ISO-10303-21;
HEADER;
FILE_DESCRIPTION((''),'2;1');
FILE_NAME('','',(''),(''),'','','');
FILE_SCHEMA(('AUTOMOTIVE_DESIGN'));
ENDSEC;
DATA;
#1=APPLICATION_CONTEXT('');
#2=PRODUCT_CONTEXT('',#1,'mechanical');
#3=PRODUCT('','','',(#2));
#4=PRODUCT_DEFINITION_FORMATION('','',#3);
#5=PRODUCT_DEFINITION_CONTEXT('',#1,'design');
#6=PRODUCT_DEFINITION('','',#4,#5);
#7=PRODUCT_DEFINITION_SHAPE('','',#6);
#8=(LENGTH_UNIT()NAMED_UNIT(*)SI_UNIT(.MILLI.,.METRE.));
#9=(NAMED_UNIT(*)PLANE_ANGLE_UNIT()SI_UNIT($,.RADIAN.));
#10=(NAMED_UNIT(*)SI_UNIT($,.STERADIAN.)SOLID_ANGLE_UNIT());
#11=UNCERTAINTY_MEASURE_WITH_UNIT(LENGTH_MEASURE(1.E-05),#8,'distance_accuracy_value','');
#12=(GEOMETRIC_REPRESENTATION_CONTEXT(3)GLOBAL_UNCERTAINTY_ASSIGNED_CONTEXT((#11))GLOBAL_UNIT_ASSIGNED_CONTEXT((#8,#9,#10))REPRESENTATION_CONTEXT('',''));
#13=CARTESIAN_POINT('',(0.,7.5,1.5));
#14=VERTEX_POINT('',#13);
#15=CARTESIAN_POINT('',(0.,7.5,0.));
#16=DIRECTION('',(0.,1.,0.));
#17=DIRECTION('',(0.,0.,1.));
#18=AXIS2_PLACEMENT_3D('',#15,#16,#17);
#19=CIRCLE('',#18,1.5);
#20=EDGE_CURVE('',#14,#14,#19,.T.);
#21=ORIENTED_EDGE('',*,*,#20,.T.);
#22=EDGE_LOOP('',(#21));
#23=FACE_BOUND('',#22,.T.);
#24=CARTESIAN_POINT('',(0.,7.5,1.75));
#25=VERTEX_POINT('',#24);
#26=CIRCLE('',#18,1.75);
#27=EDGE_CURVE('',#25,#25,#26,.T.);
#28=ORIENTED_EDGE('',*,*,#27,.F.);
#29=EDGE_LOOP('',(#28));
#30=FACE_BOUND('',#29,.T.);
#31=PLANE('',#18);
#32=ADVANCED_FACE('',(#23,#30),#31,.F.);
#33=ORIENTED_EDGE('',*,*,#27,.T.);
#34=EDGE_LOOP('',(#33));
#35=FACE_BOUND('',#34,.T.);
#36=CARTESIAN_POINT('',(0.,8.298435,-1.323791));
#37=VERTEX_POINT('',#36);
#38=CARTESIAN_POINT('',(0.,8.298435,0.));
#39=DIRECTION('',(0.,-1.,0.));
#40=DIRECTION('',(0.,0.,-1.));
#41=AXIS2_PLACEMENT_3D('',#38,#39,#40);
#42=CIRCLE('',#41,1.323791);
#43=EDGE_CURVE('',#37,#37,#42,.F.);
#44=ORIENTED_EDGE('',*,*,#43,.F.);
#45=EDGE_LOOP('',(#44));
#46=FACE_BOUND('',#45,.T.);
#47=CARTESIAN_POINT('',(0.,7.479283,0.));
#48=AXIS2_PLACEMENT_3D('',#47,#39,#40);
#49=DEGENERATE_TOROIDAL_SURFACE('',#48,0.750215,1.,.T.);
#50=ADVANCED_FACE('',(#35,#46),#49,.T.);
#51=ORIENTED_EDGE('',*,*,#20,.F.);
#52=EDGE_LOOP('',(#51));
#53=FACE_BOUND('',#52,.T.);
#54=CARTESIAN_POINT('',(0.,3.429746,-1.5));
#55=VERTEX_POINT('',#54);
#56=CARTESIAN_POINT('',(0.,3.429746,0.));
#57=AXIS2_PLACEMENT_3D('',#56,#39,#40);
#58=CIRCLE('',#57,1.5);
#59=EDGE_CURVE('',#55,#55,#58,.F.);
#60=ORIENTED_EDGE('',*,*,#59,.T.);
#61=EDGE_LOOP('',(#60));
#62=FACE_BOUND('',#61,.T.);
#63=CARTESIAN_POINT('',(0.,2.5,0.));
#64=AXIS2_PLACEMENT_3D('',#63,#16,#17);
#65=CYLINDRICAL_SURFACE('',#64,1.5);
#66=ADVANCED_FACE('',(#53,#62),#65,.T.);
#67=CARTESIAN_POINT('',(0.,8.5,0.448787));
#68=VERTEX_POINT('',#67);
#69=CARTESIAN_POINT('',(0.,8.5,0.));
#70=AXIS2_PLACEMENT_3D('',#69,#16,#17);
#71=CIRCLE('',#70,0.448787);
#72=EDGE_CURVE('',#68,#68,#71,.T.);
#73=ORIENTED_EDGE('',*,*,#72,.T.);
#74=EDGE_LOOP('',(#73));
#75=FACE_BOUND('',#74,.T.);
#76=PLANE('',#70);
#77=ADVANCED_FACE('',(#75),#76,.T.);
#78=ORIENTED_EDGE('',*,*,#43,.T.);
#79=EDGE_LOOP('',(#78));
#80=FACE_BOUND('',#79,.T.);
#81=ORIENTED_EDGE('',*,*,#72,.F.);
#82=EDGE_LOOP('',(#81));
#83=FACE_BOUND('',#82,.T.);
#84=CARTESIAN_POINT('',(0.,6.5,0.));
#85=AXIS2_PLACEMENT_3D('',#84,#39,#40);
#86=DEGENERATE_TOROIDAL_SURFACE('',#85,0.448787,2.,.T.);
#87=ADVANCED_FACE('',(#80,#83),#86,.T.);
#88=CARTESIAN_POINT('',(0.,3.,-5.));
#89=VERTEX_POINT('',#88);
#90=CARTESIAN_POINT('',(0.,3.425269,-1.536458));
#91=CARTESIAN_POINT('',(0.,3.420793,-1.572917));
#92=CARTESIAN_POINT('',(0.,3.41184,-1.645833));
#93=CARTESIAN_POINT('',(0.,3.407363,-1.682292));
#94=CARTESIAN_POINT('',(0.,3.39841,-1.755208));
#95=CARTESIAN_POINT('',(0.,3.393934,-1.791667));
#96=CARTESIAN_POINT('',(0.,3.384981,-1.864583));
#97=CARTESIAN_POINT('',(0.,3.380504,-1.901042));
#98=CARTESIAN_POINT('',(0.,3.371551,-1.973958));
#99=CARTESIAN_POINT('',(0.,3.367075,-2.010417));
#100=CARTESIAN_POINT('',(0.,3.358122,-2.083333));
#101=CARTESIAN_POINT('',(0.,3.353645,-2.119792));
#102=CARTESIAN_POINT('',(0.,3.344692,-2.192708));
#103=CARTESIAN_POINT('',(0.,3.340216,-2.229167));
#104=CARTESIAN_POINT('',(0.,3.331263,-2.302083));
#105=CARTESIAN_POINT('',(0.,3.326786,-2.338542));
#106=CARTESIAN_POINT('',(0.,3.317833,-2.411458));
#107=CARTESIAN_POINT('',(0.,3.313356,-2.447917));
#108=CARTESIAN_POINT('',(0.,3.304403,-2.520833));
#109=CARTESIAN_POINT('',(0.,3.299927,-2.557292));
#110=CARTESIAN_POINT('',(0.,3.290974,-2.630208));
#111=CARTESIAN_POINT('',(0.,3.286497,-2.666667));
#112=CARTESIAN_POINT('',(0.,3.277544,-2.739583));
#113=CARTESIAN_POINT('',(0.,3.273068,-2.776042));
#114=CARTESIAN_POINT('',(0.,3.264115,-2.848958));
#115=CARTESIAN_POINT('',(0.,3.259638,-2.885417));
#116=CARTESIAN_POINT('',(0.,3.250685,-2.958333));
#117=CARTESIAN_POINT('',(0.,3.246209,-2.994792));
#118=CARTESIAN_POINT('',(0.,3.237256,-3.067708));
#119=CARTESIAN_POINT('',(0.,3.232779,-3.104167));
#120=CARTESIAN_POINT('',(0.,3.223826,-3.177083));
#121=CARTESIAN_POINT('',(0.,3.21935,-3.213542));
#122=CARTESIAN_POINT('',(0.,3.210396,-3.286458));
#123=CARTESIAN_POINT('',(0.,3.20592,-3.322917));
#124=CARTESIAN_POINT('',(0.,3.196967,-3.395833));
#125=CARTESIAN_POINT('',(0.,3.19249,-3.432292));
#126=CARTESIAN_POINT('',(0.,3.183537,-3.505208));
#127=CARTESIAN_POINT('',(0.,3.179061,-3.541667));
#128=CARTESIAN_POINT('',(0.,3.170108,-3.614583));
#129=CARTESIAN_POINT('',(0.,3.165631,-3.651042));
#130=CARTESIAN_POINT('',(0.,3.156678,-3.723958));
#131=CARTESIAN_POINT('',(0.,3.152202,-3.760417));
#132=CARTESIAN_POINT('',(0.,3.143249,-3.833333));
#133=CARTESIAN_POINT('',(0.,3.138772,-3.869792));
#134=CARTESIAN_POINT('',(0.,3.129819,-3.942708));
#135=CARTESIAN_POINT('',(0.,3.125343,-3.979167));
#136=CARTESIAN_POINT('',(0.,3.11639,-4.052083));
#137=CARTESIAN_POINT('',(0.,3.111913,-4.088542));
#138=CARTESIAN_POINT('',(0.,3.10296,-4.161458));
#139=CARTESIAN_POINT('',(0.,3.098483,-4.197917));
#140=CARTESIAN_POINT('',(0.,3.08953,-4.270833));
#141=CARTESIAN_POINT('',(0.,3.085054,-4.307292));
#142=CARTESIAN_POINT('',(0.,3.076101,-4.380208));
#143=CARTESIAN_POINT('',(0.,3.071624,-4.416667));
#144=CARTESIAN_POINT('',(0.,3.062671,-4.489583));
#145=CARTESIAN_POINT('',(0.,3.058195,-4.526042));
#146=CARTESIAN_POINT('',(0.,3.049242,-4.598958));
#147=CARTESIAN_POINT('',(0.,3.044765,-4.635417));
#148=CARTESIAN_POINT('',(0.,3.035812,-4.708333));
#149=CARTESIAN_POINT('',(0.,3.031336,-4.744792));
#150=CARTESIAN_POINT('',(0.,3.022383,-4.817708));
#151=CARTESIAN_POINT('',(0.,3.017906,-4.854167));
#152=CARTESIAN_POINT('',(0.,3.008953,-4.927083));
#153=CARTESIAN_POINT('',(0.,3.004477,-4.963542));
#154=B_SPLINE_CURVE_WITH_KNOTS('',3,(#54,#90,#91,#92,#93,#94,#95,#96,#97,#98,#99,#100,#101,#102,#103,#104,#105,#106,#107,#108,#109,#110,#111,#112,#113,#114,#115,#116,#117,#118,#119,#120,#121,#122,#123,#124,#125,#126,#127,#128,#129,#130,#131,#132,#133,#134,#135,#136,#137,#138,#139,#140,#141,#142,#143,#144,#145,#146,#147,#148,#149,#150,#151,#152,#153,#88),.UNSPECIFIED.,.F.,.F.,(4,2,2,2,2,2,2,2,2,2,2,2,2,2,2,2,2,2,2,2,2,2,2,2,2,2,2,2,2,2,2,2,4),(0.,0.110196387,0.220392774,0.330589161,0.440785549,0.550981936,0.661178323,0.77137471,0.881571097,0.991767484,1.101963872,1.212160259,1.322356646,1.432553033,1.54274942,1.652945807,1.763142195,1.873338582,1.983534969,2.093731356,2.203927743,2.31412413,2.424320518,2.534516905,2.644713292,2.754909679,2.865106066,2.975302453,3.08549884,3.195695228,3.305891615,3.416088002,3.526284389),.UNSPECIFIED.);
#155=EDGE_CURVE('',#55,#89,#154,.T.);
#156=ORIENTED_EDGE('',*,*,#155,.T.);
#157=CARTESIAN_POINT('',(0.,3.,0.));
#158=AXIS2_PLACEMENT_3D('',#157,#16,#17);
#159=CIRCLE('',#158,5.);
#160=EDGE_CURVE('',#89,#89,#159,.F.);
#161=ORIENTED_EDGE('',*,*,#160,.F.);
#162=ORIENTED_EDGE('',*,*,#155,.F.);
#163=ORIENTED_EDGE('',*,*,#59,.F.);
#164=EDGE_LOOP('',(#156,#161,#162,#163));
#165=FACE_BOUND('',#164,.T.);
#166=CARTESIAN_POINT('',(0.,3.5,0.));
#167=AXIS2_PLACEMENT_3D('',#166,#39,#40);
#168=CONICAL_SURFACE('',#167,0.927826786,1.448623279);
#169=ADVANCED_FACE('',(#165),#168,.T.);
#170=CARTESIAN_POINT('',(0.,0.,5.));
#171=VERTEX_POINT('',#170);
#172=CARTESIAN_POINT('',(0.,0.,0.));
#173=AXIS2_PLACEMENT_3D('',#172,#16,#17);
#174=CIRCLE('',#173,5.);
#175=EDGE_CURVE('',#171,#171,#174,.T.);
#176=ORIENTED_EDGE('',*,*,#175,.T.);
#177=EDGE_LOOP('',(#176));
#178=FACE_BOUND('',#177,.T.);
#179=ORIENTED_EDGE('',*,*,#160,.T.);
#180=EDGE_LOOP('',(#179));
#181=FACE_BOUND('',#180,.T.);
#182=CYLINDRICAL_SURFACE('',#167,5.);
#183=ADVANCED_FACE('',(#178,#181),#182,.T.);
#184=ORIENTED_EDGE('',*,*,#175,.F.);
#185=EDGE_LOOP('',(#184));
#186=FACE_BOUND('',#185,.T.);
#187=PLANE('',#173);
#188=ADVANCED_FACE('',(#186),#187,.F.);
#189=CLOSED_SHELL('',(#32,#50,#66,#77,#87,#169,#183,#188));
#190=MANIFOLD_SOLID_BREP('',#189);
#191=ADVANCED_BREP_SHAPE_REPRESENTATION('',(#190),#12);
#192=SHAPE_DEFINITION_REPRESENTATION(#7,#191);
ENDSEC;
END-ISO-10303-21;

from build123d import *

# Parameters (mm, degrees)
ESBO_O2_R                     = 5
RESSALTO_EXTRUS_O2_DEPTH      = 3.5
CHANFRO1_SIZE                 = 0.5
CHANFRO1_SIZE2                = 4.072173214
RESSALTO_EXTRUS_O3_DEPTH      = 4
RESSALTO_EXTRUS_O3_DEPTH_BACK = 1
ESBO_O3_R                     = 1.5
ESBO_O4_R                     = 1.75
RESSALTO_EXTRUS_O4_DEPTH      = 1
CHANFRO2_SIZE                 = 0.5
CHANFRO2_SIZE2                = 0.714074003
FILETE2_R                     = 1
FILETE3_R                     = 2


with BuildPart() as part:
    # Esboço2 → Ressalto-extrusão2 (new body)
    with BuildSketch(Plane(origin=(0, 0, 0), x_dir=(1, 0, 0), z_dir=(0, 1, 0))):
        with Locations(Location((0, 0, 0), (0, 0, 270))):
            Circle(ESBO_O2_R)
    extrude(amount=RESSALTO_EXTRUS_O2_DEPTH)

    # Chanfro1
    chanfro1_edges = [part.edges().sort_by_distance(p)[0] for p in [
        (0, 3.5, -5),
    ]]
    chanfro1_side = [part.faces().sort_by_distance(p)[0] for p in [
        (0, 1.75, -5),
    ]]
    chamfer(chanfro1_edges, length=CHANFRO1_SIZE, length2=CHANFRO1_SIZE2, reference=chanfro1_side[0])

    # Esboço3 → Ressalto-extrusão3 (add, two sides: drawn at the far end of the back side and taken through both)
    with BuildSketch(Plane(origin=(0, 3.5, 0), x_dir=(1, 0, 0), z_dir=(0, 1, 0)).offset(-RESSALTO_EXTRUS_O3_DEPTH_BACK)):
        with Locations(Location((0, 0, 0), (0, 0, 270))):
            Circle(ESBO_O3_R)
    extrude(amount=RESSALTO_EXTRUS_O3_DEPTH + RESSALTO_EXTRUS_O3_DEPTH_BACK)

    # Esboço4 → Ressalto-extrusão4 (add)
    with BuildSketch(Plane(origin=(0, 7.5, 0), x_dir=(1, 0, 0), z_dir=(0, 1, 0))):
        with Locations(Location((0, 0, 0), (0, 0, 270))):
            Circle(ESBO_O4_R)
    extrude(amount=RESSALTO_EXTRUS_O4_DEPTH)

    # Chanfro2
    chanfro2_edges = [part.edges().sort_by_distance(p)[0] for p in [
        (0, 8.5, -1.75),
    ]]
    chanfro2_side = [part.faces().sort_by_distance(p)[0] for p in [
        (0, 8, -1.75),
    ]]
    chamfer(chanfro2_edges, length=CHANFRO2_SIZE, length2=CHANFRO2_SIZE2, reference=chanfro2_side[0])

    # Filete2
    # the kernel refuses this fillet: 1 mm, written as the material it takes off along each edge
    with BuildSketch(Plane(origin=(0, 8, 0), x_dir=(0, 0, 1), z_dir=(-1, 0, 0))) as filete2_piece_1:
        with BuildLine():
            CenterArc((1.75 - FILETE2_R, -FILETE2_R * 0.520567050552), FILETE2_R, 0, 55)
            Line((1.75 - FILETE2_R * 0.426423563649, FILETE2_R * 0.298584993737), (1.75, 0))
            Line((1.75, 0), (1.75, -FILETE2_R * 0.520567050552))
        make_face()
    revolve(axis=Axis((0, 8, 0), (0, 1, 0)), mode=Mode.SUBTRACT)

    # Filete3
    # the kernel refuses this fillet: 2 mm, written as the material it takes off along each edge
    with BuildSketch(Plane(origin=(0, 8.5, 0), x_dir=(0, 0, 1), z_dir=(-1, 0, 0))) as filete3_piece_1:
        with BuildLine():
            CenterArc((0.448881049, -2), FILETE3_R, 64.065224384, 25.934775616)
            Line((0.448881049, 0), (0.448881049, 0.04))
            Line((0.448881049, 0.04), (1.035925997, 0.04))
            Line((1.035925997, 0.04), (1.058869054, 0.032766082))
            ThreePointArc((1.058869054, 0.032766082), (1.202694274, -0.067941421), (1.341070344, -0.165443306))
            Line((1.341070344, -0.165443306), (1.323576436, -0.201415006))
        make_face()
    revolve(axis=Axis((0, 8.5, 0), (0, 1, 0)), mode=Mode.SUBTRACT)


solid = part.part
